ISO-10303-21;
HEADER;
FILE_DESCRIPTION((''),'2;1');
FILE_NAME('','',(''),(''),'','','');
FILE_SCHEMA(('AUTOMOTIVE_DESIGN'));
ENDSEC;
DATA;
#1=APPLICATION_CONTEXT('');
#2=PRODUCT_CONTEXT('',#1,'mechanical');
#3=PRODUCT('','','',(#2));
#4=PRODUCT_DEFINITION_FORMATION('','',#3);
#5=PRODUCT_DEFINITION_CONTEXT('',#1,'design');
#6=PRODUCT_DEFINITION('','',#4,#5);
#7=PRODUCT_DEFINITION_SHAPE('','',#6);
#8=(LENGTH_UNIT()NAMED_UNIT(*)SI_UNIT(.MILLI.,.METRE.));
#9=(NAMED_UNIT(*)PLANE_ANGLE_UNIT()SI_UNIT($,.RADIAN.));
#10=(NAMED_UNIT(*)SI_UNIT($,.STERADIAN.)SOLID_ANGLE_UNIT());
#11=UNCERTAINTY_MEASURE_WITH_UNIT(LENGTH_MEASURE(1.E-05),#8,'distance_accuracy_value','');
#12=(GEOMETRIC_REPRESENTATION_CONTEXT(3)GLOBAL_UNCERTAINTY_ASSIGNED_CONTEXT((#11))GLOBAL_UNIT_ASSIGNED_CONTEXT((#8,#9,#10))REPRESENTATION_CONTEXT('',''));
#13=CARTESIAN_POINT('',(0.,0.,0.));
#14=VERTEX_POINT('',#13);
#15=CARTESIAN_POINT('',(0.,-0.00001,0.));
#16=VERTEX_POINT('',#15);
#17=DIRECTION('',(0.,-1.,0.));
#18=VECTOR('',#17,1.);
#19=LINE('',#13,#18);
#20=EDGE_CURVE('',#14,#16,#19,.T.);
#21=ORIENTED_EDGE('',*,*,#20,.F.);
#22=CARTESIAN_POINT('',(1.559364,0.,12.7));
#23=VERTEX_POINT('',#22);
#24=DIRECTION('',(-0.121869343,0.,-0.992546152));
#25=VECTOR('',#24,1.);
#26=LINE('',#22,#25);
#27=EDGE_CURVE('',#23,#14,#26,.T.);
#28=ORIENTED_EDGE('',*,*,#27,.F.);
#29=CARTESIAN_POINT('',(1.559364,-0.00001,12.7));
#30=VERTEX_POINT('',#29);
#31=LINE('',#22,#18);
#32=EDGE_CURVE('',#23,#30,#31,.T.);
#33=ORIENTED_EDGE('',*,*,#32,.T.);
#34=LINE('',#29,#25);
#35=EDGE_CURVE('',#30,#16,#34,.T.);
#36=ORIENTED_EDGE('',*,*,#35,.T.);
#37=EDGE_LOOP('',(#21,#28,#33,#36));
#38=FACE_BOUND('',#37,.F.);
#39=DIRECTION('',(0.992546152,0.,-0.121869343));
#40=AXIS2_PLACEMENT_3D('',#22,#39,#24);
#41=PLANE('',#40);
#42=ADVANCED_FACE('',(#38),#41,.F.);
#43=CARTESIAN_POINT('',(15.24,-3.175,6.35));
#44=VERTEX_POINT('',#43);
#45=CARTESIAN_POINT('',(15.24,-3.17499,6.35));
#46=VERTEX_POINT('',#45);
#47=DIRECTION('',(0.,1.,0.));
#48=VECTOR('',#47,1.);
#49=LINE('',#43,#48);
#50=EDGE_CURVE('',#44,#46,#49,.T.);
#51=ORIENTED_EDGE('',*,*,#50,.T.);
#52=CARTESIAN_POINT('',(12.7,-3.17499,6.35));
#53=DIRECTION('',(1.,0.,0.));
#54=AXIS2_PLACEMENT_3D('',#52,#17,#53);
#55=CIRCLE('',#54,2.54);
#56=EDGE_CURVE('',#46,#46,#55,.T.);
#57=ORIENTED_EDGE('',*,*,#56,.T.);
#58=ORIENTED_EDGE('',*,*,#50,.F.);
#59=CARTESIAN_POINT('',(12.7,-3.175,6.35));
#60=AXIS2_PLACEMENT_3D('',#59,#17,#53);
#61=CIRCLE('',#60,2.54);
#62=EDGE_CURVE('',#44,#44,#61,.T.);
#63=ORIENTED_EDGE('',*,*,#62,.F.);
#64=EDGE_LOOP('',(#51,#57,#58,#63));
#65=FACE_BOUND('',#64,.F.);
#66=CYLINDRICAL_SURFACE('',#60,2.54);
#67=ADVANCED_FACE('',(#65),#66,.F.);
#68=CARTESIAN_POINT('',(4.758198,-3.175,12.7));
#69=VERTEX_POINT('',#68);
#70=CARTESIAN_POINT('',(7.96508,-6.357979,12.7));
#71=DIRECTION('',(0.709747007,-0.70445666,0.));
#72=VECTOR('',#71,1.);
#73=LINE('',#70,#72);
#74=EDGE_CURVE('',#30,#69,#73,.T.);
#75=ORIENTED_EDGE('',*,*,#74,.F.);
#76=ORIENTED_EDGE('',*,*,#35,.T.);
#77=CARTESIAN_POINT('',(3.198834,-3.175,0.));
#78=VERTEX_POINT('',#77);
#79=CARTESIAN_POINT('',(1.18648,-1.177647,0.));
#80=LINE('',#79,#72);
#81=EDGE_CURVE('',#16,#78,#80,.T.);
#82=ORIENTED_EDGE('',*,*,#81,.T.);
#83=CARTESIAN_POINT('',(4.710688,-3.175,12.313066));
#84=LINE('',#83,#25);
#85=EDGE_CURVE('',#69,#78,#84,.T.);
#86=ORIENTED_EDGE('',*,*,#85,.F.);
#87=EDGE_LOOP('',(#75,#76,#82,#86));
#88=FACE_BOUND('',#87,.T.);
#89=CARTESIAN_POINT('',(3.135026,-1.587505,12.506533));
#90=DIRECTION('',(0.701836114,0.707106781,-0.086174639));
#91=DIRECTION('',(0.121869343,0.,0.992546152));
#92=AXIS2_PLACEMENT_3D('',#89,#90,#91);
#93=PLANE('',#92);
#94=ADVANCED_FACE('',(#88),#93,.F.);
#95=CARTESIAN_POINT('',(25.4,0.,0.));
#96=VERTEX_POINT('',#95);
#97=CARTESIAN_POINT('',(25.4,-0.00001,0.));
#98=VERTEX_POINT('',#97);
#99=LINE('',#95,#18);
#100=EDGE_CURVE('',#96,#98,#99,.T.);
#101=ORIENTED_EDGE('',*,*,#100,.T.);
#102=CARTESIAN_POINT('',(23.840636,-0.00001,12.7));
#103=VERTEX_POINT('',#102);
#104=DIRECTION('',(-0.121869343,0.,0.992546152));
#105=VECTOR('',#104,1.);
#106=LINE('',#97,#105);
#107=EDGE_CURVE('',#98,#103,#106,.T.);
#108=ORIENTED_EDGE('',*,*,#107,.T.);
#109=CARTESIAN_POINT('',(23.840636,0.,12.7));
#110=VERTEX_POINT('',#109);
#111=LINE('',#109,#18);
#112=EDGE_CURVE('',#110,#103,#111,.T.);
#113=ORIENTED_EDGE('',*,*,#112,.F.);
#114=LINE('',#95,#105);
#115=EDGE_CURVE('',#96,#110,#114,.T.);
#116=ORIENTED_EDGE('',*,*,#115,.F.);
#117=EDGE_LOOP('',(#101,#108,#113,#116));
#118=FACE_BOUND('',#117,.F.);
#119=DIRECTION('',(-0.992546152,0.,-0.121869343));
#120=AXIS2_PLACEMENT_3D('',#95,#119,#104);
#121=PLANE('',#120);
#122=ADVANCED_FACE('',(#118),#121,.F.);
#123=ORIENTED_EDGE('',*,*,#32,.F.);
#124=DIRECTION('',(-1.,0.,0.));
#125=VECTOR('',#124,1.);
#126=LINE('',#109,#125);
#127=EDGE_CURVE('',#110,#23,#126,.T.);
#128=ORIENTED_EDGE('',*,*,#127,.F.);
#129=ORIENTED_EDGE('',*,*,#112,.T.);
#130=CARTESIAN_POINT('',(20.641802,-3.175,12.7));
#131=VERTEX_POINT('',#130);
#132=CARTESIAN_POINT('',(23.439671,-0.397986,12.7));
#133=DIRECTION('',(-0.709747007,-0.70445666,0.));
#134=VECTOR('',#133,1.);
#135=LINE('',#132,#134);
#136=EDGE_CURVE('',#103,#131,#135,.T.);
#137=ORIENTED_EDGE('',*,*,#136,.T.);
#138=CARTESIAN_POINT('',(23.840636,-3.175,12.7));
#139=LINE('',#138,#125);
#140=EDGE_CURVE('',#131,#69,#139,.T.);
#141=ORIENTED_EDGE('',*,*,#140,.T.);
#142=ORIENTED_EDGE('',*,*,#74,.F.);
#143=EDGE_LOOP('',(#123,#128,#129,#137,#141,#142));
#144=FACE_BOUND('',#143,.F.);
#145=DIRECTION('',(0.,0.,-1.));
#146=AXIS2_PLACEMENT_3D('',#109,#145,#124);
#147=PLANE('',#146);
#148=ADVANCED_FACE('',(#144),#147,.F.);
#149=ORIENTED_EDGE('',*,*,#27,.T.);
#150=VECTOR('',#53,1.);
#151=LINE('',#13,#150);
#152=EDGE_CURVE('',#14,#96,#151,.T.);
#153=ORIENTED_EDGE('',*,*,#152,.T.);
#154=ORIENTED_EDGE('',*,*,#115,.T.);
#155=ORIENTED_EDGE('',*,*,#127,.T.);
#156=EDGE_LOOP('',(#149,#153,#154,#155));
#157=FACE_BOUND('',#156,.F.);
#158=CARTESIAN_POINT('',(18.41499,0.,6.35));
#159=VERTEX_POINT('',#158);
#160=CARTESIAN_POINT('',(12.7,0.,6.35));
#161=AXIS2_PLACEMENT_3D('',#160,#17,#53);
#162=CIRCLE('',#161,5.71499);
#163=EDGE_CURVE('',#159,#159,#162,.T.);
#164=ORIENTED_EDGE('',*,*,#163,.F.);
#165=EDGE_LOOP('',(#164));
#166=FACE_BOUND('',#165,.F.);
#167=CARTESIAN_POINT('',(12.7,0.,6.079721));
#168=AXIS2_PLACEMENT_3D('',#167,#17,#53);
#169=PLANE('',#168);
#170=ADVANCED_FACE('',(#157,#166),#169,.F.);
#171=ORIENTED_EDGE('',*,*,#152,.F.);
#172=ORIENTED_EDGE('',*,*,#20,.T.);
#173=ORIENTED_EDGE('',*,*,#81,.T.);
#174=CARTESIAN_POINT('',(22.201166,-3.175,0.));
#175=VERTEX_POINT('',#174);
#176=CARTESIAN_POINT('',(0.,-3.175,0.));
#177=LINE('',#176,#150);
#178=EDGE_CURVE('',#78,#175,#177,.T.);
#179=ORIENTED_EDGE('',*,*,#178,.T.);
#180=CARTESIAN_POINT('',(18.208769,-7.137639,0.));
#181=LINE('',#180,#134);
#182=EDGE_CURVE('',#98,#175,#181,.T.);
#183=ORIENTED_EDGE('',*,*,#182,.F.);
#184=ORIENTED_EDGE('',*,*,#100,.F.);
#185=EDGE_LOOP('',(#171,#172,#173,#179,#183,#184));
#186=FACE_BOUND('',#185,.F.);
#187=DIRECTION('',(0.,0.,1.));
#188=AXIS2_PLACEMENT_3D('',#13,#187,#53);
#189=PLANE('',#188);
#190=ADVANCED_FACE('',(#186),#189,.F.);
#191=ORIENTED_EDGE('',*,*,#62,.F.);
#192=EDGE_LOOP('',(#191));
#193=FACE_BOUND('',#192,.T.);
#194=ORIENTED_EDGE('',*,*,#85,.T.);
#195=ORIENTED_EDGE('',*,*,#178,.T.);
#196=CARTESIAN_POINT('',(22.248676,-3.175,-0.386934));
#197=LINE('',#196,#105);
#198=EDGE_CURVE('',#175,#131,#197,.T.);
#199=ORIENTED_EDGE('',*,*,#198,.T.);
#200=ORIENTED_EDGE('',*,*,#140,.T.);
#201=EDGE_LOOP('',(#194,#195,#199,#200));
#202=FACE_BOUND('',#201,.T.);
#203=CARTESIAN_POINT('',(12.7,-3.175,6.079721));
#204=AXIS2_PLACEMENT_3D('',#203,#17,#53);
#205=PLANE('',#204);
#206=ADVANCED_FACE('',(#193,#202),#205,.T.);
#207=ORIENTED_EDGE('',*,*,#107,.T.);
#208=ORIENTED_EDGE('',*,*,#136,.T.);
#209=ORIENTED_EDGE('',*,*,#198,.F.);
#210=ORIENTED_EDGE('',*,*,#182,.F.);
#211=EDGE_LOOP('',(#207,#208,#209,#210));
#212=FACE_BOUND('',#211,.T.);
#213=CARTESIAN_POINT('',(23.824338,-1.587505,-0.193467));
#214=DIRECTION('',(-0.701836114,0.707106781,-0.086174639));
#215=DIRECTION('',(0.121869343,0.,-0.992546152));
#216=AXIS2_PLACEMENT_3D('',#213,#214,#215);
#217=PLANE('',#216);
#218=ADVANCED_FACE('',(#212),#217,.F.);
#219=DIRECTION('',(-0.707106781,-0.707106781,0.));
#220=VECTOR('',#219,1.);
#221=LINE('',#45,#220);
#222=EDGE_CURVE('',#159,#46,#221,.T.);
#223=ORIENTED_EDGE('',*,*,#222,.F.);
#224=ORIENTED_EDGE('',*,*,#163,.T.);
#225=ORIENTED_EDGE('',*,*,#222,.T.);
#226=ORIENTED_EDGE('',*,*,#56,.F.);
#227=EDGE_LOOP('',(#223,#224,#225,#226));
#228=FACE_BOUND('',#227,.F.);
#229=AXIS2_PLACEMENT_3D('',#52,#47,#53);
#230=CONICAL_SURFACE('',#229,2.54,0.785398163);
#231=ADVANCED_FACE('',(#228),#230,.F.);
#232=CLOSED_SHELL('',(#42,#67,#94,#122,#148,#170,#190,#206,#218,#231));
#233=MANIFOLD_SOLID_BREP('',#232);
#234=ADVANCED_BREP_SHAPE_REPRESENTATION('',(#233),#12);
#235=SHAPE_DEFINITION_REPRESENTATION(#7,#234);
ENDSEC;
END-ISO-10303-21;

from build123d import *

# Parameters (mm, degrees)
F1_DEPTH = 3.175
F2_SIZE  = 3.17499
F3_R     = 2.54
F4_DEPTH = 25.4
F5_SIZE  = 3.17499


# Not quite as in the source:
# - a fillet or chamfer is up to 0.001 mm smaller than in the source, because OpenCascade refuses the exact size


with BuildPart() as f1:
    # F0 (on Front) → F1 (new body)
    with BuildSketch(Plane.XZ):
        Polygon((1.5593639235, 12.7), (0, 0), (25.4, 0), (23.8406360765, 12.7), align=None)
    extrude(amount=F1_DEPTH)

    # F2 (size 3.175 in the source; OpenCascade refuses exactly that, so slightly less here)
    f2_edges = [f1.edges().sort_by_distance(p)[0] for p in [
        (24.620318, -3.175, 6.35),
        (0.779682, -3.175, 6.35),
    ]]
    chamfer(f2_edges, length=F2_SIZE)

    # F3 (on face) → F4 (cut)
    with BuildSketch(Plane.XZ.offset(3.175)):
        with Locations((12.7, 6.35)):
            Circle(F3_R)
    extrude(amount=-F4_DEPTH, mode=Mode.SUBTRACT)

    # F5 (size 3.175 in the source; OpenCascade refuses exactly that, so slightly less here)
    f5_edges = [f1.edges().sort_by_distance(p)[0] for p in [
        (10.16, 0, 6.35),
    ]]
    chamfer(f5_edges, length=F5_SIZE)


solid = f1.part
